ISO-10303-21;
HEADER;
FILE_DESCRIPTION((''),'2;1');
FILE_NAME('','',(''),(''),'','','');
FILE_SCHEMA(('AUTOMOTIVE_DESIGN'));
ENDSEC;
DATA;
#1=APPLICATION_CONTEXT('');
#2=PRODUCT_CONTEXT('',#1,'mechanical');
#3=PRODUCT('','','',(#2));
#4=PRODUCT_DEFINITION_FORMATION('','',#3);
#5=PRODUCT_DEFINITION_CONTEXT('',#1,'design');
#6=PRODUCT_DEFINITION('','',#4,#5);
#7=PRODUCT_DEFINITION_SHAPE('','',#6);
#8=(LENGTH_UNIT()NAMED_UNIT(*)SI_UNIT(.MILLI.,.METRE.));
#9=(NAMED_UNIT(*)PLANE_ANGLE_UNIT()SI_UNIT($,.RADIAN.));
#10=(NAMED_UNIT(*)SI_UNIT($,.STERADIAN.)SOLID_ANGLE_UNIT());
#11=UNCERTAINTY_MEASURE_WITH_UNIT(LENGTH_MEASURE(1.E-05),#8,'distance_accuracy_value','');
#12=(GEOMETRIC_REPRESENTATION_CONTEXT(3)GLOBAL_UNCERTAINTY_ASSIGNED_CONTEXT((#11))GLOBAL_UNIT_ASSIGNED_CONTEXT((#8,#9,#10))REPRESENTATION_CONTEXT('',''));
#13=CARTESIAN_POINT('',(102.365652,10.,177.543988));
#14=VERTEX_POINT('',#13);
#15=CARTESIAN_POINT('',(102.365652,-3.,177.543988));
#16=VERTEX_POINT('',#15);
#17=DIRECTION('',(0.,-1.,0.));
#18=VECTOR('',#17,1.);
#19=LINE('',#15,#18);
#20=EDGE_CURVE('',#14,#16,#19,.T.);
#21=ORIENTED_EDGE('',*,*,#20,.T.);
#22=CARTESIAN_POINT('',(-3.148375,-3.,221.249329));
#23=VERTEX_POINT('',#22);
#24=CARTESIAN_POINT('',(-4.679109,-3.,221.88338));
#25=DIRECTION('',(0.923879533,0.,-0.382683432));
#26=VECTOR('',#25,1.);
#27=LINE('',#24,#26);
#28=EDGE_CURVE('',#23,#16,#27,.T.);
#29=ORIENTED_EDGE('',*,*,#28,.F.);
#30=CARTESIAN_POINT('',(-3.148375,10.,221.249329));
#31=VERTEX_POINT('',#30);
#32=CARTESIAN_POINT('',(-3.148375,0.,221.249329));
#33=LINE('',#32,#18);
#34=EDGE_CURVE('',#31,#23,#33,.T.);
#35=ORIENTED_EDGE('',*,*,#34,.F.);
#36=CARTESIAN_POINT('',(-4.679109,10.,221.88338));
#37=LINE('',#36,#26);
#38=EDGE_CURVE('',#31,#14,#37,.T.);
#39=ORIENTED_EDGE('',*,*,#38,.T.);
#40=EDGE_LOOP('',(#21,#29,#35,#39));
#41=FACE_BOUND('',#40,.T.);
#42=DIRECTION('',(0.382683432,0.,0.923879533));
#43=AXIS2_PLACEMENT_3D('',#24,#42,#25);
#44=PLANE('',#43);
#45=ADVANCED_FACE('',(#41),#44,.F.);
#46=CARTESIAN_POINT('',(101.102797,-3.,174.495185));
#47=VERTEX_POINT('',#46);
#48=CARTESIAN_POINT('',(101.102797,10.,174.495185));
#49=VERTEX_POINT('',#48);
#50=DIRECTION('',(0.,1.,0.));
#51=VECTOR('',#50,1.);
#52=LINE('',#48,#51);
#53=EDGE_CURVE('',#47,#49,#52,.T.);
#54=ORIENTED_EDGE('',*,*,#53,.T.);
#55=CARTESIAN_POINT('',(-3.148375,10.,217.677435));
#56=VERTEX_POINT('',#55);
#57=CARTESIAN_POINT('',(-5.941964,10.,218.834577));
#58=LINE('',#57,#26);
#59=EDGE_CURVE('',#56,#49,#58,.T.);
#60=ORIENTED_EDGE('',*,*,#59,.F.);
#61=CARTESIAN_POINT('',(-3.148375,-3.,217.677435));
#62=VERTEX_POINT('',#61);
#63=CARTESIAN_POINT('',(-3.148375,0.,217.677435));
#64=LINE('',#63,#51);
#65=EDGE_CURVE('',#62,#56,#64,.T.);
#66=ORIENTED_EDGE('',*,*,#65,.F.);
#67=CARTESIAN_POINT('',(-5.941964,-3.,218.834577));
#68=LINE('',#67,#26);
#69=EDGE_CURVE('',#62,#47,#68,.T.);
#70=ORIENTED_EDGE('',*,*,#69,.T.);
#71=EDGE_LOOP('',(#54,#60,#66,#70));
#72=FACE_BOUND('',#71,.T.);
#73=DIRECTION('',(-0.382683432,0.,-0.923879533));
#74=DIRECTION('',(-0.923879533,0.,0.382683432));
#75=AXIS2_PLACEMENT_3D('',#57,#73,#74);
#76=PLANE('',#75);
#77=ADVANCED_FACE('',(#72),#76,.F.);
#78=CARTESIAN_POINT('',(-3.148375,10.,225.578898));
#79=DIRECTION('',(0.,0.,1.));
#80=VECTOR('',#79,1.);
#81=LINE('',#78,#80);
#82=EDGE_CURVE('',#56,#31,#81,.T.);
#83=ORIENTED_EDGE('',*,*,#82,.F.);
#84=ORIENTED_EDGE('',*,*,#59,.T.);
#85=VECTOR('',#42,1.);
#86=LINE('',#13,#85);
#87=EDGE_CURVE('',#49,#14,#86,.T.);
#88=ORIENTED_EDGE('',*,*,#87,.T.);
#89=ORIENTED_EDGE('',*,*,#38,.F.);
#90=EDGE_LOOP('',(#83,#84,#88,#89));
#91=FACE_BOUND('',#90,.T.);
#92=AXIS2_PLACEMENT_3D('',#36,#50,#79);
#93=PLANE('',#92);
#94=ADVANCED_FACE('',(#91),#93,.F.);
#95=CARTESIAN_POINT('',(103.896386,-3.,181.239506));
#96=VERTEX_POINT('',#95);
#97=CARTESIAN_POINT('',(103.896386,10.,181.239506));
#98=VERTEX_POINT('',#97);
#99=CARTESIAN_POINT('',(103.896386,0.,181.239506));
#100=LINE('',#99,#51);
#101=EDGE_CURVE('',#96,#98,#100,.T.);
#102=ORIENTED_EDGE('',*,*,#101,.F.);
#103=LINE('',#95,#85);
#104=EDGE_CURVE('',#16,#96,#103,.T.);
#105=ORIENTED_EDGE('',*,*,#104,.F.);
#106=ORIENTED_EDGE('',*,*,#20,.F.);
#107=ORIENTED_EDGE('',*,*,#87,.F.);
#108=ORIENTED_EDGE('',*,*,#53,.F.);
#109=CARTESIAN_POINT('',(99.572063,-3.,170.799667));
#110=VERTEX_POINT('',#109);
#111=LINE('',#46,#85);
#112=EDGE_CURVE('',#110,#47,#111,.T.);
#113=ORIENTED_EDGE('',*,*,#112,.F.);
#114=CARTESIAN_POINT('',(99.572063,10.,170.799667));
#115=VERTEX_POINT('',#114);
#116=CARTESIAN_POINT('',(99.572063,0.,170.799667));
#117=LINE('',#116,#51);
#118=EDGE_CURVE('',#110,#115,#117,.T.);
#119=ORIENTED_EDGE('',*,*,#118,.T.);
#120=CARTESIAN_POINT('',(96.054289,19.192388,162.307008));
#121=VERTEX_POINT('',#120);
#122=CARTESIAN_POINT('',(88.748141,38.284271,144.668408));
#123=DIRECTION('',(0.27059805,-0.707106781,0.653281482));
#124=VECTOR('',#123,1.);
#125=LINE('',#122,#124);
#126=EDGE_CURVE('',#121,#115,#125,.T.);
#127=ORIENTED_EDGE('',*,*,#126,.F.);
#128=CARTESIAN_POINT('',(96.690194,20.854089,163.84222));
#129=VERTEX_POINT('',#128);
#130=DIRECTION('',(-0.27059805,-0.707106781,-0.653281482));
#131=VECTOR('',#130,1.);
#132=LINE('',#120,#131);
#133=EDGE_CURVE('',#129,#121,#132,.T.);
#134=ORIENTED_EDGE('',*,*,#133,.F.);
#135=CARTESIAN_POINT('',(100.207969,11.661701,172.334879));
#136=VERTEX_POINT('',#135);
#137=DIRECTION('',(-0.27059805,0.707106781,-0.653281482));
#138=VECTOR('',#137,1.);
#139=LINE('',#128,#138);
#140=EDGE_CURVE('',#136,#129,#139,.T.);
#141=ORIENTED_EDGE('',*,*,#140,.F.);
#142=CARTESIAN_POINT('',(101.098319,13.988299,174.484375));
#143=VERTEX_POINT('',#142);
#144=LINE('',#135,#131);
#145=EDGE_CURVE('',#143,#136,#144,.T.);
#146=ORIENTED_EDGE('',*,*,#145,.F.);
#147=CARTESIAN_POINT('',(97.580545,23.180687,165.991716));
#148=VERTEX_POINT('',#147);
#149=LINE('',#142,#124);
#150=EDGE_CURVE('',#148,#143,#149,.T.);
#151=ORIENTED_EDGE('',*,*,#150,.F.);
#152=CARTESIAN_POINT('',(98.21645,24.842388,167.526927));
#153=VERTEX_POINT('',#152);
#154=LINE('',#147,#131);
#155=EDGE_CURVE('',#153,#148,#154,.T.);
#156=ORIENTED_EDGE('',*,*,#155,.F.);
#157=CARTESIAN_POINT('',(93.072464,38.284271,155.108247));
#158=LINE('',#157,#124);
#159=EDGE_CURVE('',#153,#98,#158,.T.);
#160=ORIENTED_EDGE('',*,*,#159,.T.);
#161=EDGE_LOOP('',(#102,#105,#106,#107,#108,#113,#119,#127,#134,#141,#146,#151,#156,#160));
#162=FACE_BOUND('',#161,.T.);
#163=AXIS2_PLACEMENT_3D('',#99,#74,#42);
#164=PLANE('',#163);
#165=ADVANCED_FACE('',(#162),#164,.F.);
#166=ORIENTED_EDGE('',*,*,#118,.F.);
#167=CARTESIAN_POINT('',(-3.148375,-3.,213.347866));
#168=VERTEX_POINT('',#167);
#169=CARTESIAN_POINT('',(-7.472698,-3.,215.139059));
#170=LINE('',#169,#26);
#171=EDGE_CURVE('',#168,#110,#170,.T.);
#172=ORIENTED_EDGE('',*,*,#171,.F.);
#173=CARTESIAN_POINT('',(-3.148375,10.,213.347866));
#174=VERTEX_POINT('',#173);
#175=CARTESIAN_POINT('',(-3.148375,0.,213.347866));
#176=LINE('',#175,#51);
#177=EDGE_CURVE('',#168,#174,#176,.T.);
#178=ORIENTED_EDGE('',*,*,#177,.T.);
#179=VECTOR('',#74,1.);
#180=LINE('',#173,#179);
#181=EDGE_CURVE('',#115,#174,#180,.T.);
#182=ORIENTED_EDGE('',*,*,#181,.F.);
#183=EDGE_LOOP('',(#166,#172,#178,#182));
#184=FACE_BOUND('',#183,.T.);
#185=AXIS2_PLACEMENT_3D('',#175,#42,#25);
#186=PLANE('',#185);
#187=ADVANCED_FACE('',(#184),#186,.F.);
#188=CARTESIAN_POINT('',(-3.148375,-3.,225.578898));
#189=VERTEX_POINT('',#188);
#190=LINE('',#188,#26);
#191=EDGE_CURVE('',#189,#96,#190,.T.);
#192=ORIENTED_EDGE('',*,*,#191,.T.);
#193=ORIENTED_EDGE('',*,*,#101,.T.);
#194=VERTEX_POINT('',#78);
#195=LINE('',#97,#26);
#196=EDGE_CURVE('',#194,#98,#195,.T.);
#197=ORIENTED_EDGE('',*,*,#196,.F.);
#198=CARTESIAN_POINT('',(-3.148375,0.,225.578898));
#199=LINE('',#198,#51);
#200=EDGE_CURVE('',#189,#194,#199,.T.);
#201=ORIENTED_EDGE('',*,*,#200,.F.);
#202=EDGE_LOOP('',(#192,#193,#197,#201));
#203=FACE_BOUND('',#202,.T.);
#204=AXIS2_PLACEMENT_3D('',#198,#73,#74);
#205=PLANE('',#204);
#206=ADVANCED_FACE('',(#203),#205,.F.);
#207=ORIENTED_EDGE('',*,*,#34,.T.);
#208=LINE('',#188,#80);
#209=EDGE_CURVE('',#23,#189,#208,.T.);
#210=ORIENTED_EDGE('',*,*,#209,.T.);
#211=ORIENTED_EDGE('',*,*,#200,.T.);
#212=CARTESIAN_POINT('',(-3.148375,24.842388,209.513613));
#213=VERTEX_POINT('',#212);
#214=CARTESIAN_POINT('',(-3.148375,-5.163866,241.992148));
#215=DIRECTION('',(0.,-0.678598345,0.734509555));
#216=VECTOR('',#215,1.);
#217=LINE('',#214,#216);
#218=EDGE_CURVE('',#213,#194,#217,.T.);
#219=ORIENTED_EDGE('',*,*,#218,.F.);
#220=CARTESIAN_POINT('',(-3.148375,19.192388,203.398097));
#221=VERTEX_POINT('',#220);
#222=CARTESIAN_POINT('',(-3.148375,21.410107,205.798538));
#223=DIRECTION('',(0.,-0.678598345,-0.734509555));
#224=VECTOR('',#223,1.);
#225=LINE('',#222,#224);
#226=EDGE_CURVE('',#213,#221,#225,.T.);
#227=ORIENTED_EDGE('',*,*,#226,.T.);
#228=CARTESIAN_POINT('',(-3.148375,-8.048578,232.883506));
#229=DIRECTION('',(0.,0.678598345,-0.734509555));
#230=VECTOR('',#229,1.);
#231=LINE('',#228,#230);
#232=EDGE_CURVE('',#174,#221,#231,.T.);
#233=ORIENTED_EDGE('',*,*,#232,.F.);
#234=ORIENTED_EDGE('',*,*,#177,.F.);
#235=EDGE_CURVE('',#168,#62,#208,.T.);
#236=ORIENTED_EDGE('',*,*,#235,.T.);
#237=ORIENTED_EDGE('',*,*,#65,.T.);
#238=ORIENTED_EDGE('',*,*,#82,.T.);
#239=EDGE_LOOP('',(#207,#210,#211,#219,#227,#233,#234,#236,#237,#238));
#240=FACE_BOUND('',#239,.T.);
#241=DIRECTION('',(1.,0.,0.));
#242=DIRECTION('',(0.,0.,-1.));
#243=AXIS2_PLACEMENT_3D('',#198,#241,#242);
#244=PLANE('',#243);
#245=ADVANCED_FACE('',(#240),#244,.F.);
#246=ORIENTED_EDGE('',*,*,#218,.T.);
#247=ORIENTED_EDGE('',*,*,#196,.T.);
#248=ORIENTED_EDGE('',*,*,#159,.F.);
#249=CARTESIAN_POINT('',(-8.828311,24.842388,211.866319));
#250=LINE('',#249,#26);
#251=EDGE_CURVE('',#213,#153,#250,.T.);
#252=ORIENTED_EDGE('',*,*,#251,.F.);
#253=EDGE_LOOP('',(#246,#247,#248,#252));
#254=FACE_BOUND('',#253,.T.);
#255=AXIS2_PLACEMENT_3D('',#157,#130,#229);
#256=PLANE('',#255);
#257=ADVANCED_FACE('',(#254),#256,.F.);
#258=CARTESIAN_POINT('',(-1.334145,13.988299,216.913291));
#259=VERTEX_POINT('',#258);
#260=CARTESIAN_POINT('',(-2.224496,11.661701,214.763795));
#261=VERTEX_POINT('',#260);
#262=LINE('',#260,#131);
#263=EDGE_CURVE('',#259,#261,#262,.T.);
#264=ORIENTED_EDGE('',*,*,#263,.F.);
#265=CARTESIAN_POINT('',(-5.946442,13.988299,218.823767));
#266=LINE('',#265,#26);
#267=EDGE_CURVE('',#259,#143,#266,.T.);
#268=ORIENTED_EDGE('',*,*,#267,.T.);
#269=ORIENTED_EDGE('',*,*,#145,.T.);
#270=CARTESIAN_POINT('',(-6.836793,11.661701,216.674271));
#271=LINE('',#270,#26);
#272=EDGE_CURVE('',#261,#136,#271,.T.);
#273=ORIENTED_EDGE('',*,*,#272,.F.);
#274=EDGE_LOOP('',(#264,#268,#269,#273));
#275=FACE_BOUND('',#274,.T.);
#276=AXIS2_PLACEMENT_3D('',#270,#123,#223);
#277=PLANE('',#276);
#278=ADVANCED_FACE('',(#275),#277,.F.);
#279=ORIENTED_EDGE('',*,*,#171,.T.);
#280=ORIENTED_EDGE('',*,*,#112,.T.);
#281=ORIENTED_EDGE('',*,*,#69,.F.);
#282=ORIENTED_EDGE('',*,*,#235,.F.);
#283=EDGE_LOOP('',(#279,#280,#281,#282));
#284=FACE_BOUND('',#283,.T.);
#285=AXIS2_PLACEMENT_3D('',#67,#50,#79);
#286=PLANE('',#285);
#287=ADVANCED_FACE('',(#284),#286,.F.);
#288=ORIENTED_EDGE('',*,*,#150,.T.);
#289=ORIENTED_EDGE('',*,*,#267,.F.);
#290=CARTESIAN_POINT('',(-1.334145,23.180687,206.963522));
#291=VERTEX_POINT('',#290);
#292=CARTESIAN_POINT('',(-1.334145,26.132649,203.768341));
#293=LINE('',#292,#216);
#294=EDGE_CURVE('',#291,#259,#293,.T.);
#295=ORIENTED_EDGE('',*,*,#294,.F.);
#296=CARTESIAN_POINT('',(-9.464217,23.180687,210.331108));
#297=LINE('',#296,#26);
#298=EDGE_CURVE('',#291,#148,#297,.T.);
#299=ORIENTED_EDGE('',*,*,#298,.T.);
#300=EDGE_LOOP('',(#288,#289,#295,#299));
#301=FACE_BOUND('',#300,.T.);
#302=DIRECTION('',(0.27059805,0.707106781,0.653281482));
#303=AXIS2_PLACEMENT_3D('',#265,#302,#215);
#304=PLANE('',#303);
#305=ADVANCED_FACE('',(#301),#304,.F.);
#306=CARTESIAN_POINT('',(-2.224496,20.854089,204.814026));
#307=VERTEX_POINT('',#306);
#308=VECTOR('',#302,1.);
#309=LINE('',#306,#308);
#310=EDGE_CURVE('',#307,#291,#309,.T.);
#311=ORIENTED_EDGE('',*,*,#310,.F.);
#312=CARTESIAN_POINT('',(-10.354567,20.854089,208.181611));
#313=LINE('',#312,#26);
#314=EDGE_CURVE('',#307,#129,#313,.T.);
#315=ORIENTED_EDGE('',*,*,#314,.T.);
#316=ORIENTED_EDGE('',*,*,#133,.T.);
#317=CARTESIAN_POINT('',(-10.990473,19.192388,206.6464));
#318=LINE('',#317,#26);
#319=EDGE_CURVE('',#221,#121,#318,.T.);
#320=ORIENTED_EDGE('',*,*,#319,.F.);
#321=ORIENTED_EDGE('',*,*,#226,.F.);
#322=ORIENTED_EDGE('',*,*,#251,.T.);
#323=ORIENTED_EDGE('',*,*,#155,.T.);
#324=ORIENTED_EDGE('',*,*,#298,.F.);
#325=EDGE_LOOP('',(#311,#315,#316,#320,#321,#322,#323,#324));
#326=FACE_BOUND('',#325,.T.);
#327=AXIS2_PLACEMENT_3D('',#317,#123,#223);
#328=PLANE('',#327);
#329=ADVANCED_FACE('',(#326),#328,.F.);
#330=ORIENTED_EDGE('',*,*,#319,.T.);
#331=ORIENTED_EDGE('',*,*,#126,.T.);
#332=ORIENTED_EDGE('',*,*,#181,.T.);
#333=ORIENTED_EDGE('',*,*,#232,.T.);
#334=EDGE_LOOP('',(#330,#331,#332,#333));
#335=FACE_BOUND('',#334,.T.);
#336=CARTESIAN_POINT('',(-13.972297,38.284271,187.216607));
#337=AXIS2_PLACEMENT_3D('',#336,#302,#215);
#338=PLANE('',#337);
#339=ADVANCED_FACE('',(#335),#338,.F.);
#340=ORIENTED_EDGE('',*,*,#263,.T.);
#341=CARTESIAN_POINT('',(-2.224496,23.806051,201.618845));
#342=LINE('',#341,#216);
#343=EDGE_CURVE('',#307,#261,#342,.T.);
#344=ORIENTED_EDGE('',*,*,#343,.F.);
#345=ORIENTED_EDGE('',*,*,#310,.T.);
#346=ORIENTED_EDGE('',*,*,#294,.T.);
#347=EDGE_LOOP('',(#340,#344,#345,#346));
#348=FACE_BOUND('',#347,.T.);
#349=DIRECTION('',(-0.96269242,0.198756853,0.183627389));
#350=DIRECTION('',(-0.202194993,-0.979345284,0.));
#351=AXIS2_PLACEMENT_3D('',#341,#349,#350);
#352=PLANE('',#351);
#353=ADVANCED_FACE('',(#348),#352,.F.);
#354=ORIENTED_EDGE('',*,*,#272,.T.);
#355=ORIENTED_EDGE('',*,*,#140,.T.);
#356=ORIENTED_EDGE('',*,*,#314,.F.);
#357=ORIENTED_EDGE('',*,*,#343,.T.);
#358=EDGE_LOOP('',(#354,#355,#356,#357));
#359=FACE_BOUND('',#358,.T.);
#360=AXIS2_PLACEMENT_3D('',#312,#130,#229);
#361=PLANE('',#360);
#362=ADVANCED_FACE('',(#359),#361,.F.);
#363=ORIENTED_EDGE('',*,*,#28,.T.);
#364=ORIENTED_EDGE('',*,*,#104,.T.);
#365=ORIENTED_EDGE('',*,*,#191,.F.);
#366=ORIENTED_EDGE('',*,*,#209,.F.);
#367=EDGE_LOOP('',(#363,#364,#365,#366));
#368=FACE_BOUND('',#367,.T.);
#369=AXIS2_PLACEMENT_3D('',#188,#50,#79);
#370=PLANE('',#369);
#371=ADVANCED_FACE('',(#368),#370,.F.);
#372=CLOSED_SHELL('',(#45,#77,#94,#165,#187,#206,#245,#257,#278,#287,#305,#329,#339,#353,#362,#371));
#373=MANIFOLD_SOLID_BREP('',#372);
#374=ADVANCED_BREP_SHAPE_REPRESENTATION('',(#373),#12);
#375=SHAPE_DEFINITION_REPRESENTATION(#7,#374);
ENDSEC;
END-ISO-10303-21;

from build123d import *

# Parameters (mm, degrees)
SKETCH1_W           = 214.089522673
SKETCH1_H           = 271.033566845
BOSS_EXTRUDE1_DEPTH = 10
SKETCH3_W           = 107.044761337
SKETCH3_H           = 271.033566845
CUT_EXTRUDE1_DEPTH  = 252.253590179
CUT_EXTRUDE2_DEPTH  = 249.55642867
BOSS_EXTRUDE3_DEPTH = 40
CUT_EXTRUDE3_START  = -165.689856025
CUT_EXTRUDE3_DEPTH  = 205.862728092
CUT_EXTRUDE4_DEPTH  = 250.960593361
CUT_EXTRUDE5_DEPTH  = 250.960593361
BOSS_EXTRUDE5_DEPTH = 45
CUT_EXTRUDE7_DEPTH  = 253.784190336
CUT_EXTRUDE9_DEPTH  = 253.784190336
CUT_EXTRUDE10_DEPTH = 253.784190336
BOSS_EXTRUDE6_DEPTH = 13.546139965


with BuildPart() as part:
    # Sketch1 → Boss-Extrude1 (new body)
    with BuildSketch(Plane(origin=(0, 0, 0), x_dir=(1, 0, 0), z_dir=(0, 1, 0))):
        with Locations((-3.148375333, -90.062114546)):
            Rectangle(SKETCH1_W, SKETCH1_H)
    extrude(amount=BOSS_EXTRUDE1_DEPTH)

    # Sketch3 → Cut-Extrude1 (cut, through all)
    with BuildSketch(Plane(origin=(0, 10, 0), x_dir=(1, 0, 0), z_dir=(0, 1, 0))):
        with Locations((-56.670756002, -90.062114546)):
            Rectangle(SKETCH3_W, SKETCH3_H)
    extrude(amount=-CUT_EXTRUDE1_DEPTH, mode=Mode.SUBTRACT)

    # Sketch4 → Cut-Extrude2 (cut, through all)
    with BuildSketch(Plane(origin=(0, 10, 0), x_dir=(1, 0, 0), z_dir=(0, 1, 0))):
        Polygon((103.896386003, -181.239506042), (100.834918545, -173.848469781), (9.996584241, 45.454668877), (103.896386003, 45.454668877), align=None)
    extrude(amount=-CUT_EXTRUDE2_DEPTH, mode=Mode.SUBTRACT)

    # Sketch6 → Boss-Extrude3 (add, along a direction that is not the sketch's normal)
    with BuildSketch(Plane(origin=(0, 10, 0), x_dir=(1, 0, 0), z_dir=(0, 1, 0))):
        Polygon((99.572063218, -170.799667324), (103.896386003, -181.239506042), (-3.148375333, -225.578897968), (-3.148375333, -213.347866105), align=None)
    extrude(amount=BOSS_EXTRUDE3_DEPTH, dir=(-0.2705980500730979, 0.7071067811865489, -0.6532814824381872))

    # Cut-Extrude3: read off the stored shape, not the designer's step
    # Cut-Extrude3 outline → Cut-Extrude3 (cut)
    with BuildSketch(Plane(origin=(0, 0, 0), x_dir=(1, 0, 0), z_dir=(0, 0.6785983445458481, -0.7345095552677544)).offset(CUT_EXTRUDE3_START)):
        Polygon((-3.148375333, -165), (-3.148375333, -152.122604304), (-13.972297336, -155.165042499), (-15, -155.45391393), (-15, -165), align=None)
    extrude(amount=CUT_EXTRUDE3_DEPTH, mode=Mode.SUBTRACT)

    # Sketch8 → Cut-Extrude4 (cut, through all)
    with BuildSketch(Plane(origin=(0, 10, 0), x_dir=(1, 0, 0), z_dir=(0, 1, 0))):
        Polygon((-3.148375333, -225.578897968), (103.896386003, -181.239506042), (103.896386003, -225.578897968), align=None)
    extrude(amount=-CUT_EXTRUDE4_DEPTH, mode=Mode.SUBTRACT)

    # Sketch9 → Cut-Extrude5 (cut, through all)
    with BuildSketch(Plane(origin=(0, 10, 0), x_dir=(1, 0, 0), z_dir=(0, 1, 0))):
        Polygon((-3.148375333, -213.347866105), (99.572063218, -170.799667324), (9.996584241, 45.454668877), (-3.148375333, 45.454668877), align=None)
    extrude(amount=-CUT_EXTRUDE5_DEPTH, mode=Mode.SUBTRACT)

    # Sketch13 → Boss-Extrude5 (add)
    with BuildSketch(Plane.XZ):
        Polygon((-3.148375333, 225.578897968), (-3.148375333, 213.347866105), (99.572063218, 170.799667324), (103.896386003, 181.239506042), align=None)
    extrude(amount=BOSS_EXTRUDE5_DEPTH)

    # Sketch14 → Cut-Extrude7 (cut, through all)
    with BuildSketch(Plane(origin=(24.603270673, 0, -10.191008392), x_dir=(-0.38268343236508967, 0, -0.9238795325112868), z_dir=(0.9238795325112867, 0, -0.3826834323650896))):
        Polygon((-178.918624473, 38.284271247), (-173.268624473, 32.634271247), (-167.618624473, 38.284271247), align=None)
    extrude(amount=-CUT_EXTRUDE7_DEPTH, mode=Mode.SUBTRACT)

    # Sketch21 → Cut-Extrude9 (cut, through all)
    with BuildSketch(Plane(origin=(24.603270673, 0, -10.191008392), x_dir=(-0.38268343236508967, 0, -0.9238795325112868), z_dir=(0.9238795325112867, 0, -0.3826834323650896))):
        Polygon((-178.918624473, 38.284271247), (-173.268624473, 32.634271247), (-186.710507565, 19.192388155), (-188.372208501, 20.854089091), (-197.564596656, 11.661700936), (-199.891194785, 13.988299064), (-190.698806629, 23.18068722), (-192.360507565, 24.842388155), align=None)
    extrude(amount=-CUT_EXTRUDE9_DEPTH, mode=Mode.SUBTRACT)

    # Sketch23 → Cut-Extrude10 (cut, through all)
    with BuildSketch(Plane(origin=(24.603270673, 0, -10.191008392), x_dir=(-0.38268343236508967, 0, -0.9238795325112868), z_dir=(0.9238795325112867, 0, -0.3826834323650896))):
        Polygon((-207.20289572, -3), (-203.20289572, -3), (-203.20289572, 10), (-199.90289572, 10), (-199.90289572, -3), (-195.90289572, -3), (-195.90289572, -45), (-207.20289572, -45), align=None)
    extrude(amount=-CUT_EXTRUDE10_DEPTH, mode=Mode.SUBTRACT)

    # Sketch24 → Boss-Extrude6 (add, along a direction that is not the sketch's normal)
    with BuildSketch(Plane(origin=(35.57097911, -92.95144786, 85.875940195), x_dir=(0.9626924198811571, 0.19875685341551327, -0.18362738881693624), z_dir=(-0.2705980500730966, 0.7071067811865525, -0.6532814824381838))):
        Polygon((-40.219860097, -165.940754997), (-40.219860097, -169.369289928), (-38.335322468, -168.817321636), (-39.260177115, -165.659670359), align=None)
    extrude(amount=BOSS_EXTRUDE6_DEPTH, dir=(0, 0.6785983445458494, -0.7345095552677533))


solid = part.part
